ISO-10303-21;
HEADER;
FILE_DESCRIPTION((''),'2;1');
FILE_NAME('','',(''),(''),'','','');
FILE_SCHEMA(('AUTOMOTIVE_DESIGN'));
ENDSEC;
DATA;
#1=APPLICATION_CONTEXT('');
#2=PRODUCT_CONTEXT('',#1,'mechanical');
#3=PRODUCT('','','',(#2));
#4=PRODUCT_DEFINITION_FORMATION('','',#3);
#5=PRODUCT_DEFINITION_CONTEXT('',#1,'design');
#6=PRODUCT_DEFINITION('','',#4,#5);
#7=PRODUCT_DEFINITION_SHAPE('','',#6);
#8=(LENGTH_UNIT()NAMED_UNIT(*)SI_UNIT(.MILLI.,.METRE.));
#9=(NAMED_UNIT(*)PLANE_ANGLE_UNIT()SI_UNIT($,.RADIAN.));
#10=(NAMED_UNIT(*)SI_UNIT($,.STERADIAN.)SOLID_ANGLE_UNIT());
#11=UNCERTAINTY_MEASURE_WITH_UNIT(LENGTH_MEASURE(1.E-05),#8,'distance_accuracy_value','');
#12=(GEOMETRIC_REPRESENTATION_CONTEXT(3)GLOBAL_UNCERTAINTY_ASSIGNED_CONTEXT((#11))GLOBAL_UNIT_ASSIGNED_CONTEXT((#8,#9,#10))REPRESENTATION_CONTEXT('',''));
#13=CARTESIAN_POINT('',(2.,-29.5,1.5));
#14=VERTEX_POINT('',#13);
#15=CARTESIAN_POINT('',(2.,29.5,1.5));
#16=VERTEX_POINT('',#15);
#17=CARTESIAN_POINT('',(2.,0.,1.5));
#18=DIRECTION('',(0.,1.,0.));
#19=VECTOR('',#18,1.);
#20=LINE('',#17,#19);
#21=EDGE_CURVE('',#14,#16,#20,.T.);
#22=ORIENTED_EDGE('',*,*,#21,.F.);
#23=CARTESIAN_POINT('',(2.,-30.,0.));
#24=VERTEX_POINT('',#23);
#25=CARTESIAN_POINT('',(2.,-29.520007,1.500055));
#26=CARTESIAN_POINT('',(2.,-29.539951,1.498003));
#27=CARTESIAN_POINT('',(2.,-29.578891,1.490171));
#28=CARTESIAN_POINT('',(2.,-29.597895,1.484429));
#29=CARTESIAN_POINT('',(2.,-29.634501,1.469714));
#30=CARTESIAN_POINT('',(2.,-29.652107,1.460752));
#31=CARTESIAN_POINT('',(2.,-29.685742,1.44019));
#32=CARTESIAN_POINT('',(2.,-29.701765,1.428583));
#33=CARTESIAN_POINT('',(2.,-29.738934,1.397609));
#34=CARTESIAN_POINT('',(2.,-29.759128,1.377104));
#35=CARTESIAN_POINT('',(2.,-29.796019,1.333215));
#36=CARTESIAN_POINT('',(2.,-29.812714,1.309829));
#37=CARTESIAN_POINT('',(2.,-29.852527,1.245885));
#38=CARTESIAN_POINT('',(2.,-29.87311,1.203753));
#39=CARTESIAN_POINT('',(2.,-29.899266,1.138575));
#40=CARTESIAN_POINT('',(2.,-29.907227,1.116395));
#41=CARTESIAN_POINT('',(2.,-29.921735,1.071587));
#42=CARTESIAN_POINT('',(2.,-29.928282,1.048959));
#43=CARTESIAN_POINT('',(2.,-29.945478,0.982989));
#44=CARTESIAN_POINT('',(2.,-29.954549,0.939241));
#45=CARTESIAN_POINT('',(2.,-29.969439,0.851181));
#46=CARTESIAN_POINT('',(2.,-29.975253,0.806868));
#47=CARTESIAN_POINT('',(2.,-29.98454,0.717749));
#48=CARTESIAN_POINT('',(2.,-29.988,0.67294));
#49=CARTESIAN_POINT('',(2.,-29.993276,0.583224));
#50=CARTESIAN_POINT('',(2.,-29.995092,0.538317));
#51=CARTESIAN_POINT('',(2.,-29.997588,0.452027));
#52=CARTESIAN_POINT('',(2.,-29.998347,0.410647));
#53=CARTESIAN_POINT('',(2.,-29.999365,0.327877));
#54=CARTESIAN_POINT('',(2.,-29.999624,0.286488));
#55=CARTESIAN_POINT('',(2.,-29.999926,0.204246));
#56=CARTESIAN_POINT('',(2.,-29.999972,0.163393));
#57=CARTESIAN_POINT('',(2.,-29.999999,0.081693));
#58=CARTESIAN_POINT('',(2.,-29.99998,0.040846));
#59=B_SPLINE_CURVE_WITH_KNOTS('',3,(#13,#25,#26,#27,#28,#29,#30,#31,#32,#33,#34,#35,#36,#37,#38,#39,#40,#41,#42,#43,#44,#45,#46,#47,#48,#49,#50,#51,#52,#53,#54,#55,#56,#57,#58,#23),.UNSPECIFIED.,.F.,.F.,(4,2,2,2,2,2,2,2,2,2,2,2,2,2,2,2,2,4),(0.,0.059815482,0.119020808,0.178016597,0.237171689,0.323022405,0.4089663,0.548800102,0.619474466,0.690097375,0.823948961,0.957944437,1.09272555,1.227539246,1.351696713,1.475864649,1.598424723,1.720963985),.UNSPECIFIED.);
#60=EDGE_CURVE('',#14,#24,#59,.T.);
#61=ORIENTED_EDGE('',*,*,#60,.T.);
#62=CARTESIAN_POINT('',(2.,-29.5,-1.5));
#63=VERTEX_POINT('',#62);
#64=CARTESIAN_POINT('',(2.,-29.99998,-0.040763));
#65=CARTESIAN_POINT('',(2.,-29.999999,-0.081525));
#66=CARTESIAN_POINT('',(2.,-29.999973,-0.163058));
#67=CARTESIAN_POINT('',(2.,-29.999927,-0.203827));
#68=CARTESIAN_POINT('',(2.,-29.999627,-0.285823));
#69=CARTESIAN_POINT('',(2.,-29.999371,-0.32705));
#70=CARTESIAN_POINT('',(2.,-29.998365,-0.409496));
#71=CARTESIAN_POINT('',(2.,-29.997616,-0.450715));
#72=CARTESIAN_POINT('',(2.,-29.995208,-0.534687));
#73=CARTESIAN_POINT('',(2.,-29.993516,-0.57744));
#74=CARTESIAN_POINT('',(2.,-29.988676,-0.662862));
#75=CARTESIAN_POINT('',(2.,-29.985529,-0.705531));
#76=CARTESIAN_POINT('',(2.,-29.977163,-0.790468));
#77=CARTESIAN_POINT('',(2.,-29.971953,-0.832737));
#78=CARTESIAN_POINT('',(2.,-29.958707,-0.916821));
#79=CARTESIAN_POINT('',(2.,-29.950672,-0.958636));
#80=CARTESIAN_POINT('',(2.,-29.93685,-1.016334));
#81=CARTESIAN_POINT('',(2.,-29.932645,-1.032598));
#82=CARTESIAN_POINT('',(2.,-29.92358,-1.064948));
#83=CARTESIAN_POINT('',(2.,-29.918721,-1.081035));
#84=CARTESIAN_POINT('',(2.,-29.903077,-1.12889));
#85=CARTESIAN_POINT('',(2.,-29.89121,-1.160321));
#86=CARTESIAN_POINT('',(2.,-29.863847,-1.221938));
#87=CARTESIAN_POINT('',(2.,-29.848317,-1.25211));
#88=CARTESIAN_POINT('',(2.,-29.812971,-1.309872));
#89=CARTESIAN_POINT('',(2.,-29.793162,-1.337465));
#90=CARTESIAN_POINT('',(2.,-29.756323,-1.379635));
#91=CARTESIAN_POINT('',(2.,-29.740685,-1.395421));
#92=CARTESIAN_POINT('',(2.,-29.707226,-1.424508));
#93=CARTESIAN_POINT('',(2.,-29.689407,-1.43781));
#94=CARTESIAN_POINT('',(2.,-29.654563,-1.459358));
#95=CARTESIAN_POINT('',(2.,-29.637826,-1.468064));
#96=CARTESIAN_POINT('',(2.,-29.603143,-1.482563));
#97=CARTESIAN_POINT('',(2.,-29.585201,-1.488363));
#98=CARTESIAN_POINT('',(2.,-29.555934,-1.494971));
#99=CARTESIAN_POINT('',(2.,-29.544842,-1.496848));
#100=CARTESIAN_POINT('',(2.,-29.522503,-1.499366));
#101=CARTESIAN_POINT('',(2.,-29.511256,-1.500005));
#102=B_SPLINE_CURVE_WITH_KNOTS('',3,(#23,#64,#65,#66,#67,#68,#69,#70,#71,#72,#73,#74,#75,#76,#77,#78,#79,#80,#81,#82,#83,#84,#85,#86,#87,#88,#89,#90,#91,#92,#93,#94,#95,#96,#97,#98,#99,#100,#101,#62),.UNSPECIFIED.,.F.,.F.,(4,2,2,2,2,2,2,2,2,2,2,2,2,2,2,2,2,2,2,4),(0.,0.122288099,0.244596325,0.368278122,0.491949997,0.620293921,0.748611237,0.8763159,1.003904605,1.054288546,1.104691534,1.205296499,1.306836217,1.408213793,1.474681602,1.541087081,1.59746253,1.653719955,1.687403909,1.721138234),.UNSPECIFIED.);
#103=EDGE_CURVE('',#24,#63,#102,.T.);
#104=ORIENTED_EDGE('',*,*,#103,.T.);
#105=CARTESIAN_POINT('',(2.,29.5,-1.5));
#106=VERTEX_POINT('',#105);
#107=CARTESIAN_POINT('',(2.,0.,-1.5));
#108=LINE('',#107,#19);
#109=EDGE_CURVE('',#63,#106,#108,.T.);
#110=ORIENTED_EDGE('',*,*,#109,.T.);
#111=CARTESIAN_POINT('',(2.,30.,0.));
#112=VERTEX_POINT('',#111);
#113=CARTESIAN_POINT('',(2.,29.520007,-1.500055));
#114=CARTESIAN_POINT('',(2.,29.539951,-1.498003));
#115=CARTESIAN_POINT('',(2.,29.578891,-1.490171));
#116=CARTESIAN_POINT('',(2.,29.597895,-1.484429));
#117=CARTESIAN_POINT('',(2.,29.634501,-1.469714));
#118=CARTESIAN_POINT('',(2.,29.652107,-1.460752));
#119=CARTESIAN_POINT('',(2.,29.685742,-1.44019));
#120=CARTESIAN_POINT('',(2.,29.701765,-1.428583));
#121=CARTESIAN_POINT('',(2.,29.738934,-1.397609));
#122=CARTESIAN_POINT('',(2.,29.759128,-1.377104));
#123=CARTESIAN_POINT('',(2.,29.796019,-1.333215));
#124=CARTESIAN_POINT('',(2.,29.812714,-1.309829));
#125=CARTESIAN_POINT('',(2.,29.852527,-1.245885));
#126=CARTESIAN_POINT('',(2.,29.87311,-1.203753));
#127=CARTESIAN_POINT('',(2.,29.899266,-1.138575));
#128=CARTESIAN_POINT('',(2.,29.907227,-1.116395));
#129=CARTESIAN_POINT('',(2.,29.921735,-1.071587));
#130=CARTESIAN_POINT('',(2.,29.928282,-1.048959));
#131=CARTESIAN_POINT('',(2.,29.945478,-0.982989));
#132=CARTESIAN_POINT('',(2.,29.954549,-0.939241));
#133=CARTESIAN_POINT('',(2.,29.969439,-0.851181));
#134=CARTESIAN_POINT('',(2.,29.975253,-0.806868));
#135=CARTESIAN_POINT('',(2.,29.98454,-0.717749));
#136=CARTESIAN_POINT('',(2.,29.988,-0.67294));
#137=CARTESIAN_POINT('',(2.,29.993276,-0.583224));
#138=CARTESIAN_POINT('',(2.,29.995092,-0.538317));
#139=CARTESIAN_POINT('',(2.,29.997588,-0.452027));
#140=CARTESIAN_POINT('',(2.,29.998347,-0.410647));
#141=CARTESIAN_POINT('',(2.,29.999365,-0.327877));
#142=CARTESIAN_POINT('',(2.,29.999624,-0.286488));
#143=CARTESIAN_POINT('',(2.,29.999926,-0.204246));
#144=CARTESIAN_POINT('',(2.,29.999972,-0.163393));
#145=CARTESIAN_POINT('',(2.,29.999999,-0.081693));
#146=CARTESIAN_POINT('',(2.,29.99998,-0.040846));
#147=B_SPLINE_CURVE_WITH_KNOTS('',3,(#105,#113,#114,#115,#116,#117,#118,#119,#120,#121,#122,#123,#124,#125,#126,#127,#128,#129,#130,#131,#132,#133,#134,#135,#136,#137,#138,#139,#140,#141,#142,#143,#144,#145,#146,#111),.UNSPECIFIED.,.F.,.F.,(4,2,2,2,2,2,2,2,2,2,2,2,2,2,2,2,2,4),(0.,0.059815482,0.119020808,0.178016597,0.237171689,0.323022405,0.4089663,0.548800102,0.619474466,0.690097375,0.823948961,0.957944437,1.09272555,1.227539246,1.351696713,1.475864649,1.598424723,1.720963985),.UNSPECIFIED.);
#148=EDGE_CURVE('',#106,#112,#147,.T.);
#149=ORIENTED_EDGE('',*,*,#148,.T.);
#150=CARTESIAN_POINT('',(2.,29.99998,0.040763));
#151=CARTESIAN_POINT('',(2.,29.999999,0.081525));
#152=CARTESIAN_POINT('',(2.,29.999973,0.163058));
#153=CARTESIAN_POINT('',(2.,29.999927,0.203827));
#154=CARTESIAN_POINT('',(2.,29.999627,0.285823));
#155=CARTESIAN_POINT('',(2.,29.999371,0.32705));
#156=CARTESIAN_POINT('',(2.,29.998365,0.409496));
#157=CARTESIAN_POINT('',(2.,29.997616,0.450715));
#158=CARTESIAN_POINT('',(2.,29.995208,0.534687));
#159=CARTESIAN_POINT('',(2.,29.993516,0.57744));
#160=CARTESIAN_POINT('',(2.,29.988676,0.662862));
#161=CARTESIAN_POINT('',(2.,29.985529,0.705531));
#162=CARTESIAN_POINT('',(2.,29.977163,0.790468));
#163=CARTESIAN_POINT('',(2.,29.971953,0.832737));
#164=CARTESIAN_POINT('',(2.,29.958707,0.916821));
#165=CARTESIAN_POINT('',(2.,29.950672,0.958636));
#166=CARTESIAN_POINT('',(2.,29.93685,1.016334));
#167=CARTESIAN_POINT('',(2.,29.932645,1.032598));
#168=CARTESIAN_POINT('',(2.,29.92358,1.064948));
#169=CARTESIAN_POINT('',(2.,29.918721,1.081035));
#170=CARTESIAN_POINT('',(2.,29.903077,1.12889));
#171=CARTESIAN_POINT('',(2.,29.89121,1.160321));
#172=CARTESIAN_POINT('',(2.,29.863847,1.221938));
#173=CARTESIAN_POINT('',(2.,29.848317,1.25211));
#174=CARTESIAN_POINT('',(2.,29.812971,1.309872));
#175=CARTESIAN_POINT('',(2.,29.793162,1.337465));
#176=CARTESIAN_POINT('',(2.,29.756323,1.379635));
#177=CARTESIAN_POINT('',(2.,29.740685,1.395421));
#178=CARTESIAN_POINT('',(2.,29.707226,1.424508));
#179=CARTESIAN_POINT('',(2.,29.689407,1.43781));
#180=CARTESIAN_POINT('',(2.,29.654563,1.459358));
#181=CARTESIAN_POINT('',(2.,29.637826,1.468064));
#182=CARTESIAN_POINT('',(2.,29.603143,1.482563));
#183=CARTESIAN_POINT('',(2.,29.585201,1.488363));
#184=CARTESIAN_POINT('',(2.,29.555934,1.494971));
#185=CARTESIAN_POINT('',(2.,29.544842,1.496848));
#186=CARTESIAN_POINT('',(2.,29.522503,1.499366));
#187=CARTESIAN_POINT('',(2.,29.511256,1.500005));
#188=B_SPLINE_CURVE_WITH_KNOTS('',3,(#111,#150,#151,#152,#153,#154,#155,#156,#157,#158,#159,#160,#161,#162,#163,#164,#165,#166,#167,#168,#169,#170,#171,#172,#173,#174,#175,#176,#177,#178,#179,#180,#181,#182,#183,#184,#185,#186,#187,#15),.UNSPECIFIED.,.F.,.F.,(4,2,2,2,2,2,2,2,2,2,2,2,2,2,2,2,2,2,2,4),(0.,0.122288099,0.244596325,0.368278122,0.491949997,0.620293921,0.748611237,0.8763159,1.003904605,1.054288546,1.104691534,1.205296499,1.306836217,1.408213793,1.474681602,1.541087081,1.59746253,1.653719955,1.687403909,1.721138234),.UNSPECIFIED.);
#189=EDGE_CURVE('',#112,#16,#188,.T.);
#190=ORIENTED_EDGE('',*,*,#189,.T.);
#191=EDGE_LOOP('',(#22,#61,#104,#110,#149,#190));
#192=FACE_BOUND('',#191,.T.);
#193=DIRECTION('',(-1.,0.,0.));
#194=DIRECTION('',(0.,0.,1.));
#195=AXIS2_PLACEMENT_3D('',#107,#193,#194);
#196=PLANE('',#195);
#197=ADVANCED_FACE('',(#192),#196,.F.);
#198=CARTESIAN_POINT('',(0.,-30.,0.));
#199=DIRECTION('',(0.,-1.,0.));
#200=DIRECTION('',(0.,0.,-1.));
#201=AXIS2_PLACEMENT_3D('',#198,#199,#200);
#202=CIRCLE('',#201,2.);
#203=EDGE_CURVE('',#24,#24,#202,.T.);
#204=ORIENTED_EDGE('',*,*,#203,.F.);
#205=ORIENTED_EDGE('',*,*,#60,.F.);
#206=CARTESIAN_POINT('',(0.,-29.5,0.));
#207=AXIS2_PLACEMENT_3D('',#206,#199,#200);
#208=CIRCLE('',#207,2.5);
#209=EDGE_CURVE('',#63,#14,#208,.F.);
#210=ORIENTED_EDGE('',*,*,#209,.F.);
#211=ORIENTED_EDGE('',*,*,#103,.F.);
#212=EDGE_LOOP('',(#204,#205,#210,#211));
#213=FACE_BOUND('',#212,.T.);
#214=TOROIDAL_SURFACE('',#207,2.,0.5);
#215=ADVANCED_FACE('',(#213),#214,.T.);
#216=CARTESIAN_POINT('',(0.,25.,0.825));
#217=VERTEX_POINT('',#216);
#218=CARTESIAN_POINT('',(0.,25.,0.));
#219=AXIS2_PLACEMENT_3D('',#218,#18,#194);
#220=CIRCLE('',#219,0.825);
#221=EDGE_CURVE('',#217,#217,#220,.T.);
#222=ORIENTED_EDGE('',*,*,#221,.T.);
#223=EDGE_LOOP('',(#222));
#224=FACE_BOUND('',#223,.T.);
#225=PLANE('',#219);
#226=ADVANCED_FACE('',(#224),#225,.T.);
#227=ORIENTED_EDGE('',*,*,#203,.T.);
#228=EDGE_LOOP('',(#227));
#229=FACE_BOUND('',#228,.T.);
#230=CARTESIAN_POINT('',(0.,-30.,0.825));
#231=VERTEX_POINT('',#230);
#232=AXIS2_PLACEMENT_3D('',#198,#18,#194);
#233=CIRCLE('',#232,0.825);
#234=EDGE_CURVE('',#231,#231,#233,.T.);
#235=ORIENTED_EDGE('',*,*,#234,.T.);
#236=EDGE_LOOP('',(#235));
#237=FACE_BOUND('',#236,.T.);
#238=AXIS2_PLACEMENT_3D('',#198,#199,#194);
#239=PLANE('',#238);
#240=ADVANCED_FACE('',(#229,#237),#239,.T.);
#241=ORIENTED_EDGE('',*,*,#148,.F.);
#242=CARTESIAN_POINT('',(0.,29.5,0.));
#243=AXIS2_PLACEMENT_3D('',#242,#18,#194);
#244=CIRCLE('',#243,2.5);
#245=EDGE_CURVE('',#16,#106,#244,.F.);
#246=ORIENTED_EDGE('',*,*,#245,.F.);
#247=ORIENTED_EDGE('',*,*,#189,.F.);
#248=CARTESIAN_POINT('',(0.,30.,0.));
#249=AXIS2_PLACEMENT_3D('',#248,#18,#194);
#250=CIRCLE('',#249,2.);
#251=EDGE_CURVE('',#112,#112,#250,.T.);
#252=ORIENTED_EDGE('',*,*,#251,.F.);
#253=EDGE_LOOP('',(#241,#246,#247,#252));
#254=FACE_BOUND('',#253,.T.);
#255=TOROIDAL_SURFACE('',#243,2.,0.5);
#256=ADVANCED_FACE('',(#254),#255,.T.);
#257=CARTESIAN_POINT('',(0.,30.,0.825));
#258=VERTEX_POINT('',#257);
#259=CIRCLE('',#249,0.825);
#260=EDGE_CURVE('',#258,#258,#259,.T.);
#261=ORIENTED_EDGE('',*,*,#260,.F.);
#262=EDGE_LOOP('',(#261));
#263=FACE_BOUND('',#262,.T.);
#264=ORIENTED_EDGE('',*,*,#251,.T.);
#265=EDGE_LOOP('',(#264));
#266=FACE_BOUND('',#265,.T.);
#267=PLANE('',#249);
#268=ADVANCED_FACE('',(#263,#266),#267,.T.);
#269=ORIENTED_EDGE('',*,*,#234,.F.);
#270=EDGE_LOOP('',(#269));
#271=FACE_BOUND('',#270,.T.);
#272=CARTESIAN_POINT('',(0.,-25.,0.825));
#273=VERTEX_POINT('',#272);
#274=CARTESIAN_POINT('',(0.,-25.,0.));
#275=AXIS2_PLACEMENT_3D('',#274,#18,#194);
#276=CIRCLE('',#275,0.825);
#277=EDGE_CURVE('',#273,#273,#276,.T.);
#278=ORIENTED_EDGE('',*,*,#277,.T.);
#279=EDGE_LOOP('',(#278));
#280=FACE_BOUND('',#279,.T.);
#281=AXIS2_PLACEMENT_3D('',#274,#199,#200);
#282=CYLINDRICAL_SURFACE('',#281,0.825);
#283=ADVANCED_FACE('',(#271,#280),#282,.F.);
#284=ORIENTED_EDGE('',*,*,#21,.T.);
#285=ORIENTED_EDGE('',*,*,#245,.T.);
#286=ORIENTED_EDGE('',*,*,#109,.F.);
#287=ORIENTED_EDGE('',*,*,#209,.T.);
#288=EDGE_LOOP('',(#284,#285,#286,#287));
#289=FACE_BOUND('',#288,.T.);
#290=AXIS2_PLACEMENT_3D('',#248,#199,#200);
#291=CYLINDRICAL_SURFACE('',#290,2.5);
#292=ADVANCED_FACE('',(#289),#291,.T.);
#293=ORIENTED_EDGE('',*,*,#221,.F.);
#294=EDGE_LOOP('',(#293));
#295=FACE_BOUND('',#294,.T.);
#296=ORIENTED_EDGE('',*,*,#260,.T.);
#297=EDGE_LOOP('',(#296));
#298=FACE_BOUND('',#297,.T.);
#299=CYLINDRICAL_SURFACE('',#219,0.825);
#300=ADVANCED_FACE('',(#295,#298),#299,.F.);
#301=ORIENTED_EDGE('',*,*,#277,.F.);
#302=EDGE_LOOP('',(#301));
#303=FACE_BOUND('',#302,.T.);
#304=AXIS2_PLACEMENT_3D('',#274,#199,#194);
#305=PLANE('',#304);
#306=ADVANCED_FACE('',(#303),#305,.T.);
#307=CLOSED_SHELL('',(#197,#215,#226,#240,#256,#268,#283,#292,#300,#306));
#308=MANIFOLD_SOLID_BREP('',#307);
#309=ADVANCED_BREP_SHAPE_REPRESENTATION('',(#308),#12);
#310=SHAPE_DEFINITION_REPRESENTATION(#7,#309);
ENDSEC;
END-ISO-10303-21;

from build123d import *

# Parameters (mm, degrees)
SKETCH1_R            = 2.5
BOSS_EXTRUDE1_DEPTH  = 30
SKETCH2_R            = 0.825
CUT_EXTRUDE1_DEPTH   = 5
CUT_EXTRUDE2_DEPTH   = 31.207614934
FILLET1_R            = 0.5
FILLET1_OF_MIRROR1_R = 0.5


with BuildPart() as part:
    # Sketch1 → Boss-Extrude1 (new body)
    with BuildSketch(Plane(origin=(0, 0, 0), x_dir=(1, 0, 0), z_dir=(0, 1, 0))):
        with Locations(Location((0, 0, 0), (0, 0, 270))):
            Circle(SKETCH1_R)
    boss_extrude1 = extrude(amount=BOSS_EXTRUDE1_DEPTH)

    # Sketch2 → Cut-Extrude1 (cut)
    with BuildSketch(Plane(origin=(0, 30, 0), x_dir=(1, 0, 0), z_dir=(0, 1, 0))):
        with Locations(Location((0, 0, 0), (0, 0, 270))):
            Circle(SKETCH2_R)
    cut_extrude1 = extrude(amount=-CUT_EXTRUDE1_DEPTH, mode=Mode.SUBTRACT)

    # Sketch3 → Cut-Extrude2 (cut, through all)
    with BuildSketch(Plane(origin=(0, 30, 0), x_dir=(1, 0, 0), z_dir=(0, 1, 0))):
        with BuildLine():
            Line((2, 1.5), (2, -1.5))
            ThreePointArc((2, -1.5), (2.5, 0), (2, 1.5))
        make_face()
    cut_extrude2 = extrude(amount=-CUT_EXTRUDE2_DEPTH, mode=Mode.SUBTRACT)

    # Fillet1
    fillet1_edges = [part.edges().sort_by_distance(p)[0] for p in [
        (-2.5, 30, 0),
    ]]
    fillet(fillet1_edges, radius=FILLET1_R - 0.0001)  # a hair under: the kernel refuses the full size

    # Mirror1: Boss-Extrude1, Cut-Extrude1, Cut-Extrude2 across plane
    add(boss_extrude1.mirror(Plane.ZX))
    add(cut_extrude1.mirror(Plane.ZX), mode=Mode.SUBTRACT)
    add(cut_extrude2.mirror(Plane.ZX), mode=Mode.SUBTRACT)

    # Fillet1 of Mirror1
    fillet1_of_mirror1_edges = [part.edges().sort_by_distance(p)[0] for p in [
        (-2.5, -30, 0),
    ]]
    fillet(fillet1_of_mirror1_edges, radius=FILLET1_OF_MIRROR1_R - 0.0001)  # a hair under: the kernel refuses the full size


solid = part.part
